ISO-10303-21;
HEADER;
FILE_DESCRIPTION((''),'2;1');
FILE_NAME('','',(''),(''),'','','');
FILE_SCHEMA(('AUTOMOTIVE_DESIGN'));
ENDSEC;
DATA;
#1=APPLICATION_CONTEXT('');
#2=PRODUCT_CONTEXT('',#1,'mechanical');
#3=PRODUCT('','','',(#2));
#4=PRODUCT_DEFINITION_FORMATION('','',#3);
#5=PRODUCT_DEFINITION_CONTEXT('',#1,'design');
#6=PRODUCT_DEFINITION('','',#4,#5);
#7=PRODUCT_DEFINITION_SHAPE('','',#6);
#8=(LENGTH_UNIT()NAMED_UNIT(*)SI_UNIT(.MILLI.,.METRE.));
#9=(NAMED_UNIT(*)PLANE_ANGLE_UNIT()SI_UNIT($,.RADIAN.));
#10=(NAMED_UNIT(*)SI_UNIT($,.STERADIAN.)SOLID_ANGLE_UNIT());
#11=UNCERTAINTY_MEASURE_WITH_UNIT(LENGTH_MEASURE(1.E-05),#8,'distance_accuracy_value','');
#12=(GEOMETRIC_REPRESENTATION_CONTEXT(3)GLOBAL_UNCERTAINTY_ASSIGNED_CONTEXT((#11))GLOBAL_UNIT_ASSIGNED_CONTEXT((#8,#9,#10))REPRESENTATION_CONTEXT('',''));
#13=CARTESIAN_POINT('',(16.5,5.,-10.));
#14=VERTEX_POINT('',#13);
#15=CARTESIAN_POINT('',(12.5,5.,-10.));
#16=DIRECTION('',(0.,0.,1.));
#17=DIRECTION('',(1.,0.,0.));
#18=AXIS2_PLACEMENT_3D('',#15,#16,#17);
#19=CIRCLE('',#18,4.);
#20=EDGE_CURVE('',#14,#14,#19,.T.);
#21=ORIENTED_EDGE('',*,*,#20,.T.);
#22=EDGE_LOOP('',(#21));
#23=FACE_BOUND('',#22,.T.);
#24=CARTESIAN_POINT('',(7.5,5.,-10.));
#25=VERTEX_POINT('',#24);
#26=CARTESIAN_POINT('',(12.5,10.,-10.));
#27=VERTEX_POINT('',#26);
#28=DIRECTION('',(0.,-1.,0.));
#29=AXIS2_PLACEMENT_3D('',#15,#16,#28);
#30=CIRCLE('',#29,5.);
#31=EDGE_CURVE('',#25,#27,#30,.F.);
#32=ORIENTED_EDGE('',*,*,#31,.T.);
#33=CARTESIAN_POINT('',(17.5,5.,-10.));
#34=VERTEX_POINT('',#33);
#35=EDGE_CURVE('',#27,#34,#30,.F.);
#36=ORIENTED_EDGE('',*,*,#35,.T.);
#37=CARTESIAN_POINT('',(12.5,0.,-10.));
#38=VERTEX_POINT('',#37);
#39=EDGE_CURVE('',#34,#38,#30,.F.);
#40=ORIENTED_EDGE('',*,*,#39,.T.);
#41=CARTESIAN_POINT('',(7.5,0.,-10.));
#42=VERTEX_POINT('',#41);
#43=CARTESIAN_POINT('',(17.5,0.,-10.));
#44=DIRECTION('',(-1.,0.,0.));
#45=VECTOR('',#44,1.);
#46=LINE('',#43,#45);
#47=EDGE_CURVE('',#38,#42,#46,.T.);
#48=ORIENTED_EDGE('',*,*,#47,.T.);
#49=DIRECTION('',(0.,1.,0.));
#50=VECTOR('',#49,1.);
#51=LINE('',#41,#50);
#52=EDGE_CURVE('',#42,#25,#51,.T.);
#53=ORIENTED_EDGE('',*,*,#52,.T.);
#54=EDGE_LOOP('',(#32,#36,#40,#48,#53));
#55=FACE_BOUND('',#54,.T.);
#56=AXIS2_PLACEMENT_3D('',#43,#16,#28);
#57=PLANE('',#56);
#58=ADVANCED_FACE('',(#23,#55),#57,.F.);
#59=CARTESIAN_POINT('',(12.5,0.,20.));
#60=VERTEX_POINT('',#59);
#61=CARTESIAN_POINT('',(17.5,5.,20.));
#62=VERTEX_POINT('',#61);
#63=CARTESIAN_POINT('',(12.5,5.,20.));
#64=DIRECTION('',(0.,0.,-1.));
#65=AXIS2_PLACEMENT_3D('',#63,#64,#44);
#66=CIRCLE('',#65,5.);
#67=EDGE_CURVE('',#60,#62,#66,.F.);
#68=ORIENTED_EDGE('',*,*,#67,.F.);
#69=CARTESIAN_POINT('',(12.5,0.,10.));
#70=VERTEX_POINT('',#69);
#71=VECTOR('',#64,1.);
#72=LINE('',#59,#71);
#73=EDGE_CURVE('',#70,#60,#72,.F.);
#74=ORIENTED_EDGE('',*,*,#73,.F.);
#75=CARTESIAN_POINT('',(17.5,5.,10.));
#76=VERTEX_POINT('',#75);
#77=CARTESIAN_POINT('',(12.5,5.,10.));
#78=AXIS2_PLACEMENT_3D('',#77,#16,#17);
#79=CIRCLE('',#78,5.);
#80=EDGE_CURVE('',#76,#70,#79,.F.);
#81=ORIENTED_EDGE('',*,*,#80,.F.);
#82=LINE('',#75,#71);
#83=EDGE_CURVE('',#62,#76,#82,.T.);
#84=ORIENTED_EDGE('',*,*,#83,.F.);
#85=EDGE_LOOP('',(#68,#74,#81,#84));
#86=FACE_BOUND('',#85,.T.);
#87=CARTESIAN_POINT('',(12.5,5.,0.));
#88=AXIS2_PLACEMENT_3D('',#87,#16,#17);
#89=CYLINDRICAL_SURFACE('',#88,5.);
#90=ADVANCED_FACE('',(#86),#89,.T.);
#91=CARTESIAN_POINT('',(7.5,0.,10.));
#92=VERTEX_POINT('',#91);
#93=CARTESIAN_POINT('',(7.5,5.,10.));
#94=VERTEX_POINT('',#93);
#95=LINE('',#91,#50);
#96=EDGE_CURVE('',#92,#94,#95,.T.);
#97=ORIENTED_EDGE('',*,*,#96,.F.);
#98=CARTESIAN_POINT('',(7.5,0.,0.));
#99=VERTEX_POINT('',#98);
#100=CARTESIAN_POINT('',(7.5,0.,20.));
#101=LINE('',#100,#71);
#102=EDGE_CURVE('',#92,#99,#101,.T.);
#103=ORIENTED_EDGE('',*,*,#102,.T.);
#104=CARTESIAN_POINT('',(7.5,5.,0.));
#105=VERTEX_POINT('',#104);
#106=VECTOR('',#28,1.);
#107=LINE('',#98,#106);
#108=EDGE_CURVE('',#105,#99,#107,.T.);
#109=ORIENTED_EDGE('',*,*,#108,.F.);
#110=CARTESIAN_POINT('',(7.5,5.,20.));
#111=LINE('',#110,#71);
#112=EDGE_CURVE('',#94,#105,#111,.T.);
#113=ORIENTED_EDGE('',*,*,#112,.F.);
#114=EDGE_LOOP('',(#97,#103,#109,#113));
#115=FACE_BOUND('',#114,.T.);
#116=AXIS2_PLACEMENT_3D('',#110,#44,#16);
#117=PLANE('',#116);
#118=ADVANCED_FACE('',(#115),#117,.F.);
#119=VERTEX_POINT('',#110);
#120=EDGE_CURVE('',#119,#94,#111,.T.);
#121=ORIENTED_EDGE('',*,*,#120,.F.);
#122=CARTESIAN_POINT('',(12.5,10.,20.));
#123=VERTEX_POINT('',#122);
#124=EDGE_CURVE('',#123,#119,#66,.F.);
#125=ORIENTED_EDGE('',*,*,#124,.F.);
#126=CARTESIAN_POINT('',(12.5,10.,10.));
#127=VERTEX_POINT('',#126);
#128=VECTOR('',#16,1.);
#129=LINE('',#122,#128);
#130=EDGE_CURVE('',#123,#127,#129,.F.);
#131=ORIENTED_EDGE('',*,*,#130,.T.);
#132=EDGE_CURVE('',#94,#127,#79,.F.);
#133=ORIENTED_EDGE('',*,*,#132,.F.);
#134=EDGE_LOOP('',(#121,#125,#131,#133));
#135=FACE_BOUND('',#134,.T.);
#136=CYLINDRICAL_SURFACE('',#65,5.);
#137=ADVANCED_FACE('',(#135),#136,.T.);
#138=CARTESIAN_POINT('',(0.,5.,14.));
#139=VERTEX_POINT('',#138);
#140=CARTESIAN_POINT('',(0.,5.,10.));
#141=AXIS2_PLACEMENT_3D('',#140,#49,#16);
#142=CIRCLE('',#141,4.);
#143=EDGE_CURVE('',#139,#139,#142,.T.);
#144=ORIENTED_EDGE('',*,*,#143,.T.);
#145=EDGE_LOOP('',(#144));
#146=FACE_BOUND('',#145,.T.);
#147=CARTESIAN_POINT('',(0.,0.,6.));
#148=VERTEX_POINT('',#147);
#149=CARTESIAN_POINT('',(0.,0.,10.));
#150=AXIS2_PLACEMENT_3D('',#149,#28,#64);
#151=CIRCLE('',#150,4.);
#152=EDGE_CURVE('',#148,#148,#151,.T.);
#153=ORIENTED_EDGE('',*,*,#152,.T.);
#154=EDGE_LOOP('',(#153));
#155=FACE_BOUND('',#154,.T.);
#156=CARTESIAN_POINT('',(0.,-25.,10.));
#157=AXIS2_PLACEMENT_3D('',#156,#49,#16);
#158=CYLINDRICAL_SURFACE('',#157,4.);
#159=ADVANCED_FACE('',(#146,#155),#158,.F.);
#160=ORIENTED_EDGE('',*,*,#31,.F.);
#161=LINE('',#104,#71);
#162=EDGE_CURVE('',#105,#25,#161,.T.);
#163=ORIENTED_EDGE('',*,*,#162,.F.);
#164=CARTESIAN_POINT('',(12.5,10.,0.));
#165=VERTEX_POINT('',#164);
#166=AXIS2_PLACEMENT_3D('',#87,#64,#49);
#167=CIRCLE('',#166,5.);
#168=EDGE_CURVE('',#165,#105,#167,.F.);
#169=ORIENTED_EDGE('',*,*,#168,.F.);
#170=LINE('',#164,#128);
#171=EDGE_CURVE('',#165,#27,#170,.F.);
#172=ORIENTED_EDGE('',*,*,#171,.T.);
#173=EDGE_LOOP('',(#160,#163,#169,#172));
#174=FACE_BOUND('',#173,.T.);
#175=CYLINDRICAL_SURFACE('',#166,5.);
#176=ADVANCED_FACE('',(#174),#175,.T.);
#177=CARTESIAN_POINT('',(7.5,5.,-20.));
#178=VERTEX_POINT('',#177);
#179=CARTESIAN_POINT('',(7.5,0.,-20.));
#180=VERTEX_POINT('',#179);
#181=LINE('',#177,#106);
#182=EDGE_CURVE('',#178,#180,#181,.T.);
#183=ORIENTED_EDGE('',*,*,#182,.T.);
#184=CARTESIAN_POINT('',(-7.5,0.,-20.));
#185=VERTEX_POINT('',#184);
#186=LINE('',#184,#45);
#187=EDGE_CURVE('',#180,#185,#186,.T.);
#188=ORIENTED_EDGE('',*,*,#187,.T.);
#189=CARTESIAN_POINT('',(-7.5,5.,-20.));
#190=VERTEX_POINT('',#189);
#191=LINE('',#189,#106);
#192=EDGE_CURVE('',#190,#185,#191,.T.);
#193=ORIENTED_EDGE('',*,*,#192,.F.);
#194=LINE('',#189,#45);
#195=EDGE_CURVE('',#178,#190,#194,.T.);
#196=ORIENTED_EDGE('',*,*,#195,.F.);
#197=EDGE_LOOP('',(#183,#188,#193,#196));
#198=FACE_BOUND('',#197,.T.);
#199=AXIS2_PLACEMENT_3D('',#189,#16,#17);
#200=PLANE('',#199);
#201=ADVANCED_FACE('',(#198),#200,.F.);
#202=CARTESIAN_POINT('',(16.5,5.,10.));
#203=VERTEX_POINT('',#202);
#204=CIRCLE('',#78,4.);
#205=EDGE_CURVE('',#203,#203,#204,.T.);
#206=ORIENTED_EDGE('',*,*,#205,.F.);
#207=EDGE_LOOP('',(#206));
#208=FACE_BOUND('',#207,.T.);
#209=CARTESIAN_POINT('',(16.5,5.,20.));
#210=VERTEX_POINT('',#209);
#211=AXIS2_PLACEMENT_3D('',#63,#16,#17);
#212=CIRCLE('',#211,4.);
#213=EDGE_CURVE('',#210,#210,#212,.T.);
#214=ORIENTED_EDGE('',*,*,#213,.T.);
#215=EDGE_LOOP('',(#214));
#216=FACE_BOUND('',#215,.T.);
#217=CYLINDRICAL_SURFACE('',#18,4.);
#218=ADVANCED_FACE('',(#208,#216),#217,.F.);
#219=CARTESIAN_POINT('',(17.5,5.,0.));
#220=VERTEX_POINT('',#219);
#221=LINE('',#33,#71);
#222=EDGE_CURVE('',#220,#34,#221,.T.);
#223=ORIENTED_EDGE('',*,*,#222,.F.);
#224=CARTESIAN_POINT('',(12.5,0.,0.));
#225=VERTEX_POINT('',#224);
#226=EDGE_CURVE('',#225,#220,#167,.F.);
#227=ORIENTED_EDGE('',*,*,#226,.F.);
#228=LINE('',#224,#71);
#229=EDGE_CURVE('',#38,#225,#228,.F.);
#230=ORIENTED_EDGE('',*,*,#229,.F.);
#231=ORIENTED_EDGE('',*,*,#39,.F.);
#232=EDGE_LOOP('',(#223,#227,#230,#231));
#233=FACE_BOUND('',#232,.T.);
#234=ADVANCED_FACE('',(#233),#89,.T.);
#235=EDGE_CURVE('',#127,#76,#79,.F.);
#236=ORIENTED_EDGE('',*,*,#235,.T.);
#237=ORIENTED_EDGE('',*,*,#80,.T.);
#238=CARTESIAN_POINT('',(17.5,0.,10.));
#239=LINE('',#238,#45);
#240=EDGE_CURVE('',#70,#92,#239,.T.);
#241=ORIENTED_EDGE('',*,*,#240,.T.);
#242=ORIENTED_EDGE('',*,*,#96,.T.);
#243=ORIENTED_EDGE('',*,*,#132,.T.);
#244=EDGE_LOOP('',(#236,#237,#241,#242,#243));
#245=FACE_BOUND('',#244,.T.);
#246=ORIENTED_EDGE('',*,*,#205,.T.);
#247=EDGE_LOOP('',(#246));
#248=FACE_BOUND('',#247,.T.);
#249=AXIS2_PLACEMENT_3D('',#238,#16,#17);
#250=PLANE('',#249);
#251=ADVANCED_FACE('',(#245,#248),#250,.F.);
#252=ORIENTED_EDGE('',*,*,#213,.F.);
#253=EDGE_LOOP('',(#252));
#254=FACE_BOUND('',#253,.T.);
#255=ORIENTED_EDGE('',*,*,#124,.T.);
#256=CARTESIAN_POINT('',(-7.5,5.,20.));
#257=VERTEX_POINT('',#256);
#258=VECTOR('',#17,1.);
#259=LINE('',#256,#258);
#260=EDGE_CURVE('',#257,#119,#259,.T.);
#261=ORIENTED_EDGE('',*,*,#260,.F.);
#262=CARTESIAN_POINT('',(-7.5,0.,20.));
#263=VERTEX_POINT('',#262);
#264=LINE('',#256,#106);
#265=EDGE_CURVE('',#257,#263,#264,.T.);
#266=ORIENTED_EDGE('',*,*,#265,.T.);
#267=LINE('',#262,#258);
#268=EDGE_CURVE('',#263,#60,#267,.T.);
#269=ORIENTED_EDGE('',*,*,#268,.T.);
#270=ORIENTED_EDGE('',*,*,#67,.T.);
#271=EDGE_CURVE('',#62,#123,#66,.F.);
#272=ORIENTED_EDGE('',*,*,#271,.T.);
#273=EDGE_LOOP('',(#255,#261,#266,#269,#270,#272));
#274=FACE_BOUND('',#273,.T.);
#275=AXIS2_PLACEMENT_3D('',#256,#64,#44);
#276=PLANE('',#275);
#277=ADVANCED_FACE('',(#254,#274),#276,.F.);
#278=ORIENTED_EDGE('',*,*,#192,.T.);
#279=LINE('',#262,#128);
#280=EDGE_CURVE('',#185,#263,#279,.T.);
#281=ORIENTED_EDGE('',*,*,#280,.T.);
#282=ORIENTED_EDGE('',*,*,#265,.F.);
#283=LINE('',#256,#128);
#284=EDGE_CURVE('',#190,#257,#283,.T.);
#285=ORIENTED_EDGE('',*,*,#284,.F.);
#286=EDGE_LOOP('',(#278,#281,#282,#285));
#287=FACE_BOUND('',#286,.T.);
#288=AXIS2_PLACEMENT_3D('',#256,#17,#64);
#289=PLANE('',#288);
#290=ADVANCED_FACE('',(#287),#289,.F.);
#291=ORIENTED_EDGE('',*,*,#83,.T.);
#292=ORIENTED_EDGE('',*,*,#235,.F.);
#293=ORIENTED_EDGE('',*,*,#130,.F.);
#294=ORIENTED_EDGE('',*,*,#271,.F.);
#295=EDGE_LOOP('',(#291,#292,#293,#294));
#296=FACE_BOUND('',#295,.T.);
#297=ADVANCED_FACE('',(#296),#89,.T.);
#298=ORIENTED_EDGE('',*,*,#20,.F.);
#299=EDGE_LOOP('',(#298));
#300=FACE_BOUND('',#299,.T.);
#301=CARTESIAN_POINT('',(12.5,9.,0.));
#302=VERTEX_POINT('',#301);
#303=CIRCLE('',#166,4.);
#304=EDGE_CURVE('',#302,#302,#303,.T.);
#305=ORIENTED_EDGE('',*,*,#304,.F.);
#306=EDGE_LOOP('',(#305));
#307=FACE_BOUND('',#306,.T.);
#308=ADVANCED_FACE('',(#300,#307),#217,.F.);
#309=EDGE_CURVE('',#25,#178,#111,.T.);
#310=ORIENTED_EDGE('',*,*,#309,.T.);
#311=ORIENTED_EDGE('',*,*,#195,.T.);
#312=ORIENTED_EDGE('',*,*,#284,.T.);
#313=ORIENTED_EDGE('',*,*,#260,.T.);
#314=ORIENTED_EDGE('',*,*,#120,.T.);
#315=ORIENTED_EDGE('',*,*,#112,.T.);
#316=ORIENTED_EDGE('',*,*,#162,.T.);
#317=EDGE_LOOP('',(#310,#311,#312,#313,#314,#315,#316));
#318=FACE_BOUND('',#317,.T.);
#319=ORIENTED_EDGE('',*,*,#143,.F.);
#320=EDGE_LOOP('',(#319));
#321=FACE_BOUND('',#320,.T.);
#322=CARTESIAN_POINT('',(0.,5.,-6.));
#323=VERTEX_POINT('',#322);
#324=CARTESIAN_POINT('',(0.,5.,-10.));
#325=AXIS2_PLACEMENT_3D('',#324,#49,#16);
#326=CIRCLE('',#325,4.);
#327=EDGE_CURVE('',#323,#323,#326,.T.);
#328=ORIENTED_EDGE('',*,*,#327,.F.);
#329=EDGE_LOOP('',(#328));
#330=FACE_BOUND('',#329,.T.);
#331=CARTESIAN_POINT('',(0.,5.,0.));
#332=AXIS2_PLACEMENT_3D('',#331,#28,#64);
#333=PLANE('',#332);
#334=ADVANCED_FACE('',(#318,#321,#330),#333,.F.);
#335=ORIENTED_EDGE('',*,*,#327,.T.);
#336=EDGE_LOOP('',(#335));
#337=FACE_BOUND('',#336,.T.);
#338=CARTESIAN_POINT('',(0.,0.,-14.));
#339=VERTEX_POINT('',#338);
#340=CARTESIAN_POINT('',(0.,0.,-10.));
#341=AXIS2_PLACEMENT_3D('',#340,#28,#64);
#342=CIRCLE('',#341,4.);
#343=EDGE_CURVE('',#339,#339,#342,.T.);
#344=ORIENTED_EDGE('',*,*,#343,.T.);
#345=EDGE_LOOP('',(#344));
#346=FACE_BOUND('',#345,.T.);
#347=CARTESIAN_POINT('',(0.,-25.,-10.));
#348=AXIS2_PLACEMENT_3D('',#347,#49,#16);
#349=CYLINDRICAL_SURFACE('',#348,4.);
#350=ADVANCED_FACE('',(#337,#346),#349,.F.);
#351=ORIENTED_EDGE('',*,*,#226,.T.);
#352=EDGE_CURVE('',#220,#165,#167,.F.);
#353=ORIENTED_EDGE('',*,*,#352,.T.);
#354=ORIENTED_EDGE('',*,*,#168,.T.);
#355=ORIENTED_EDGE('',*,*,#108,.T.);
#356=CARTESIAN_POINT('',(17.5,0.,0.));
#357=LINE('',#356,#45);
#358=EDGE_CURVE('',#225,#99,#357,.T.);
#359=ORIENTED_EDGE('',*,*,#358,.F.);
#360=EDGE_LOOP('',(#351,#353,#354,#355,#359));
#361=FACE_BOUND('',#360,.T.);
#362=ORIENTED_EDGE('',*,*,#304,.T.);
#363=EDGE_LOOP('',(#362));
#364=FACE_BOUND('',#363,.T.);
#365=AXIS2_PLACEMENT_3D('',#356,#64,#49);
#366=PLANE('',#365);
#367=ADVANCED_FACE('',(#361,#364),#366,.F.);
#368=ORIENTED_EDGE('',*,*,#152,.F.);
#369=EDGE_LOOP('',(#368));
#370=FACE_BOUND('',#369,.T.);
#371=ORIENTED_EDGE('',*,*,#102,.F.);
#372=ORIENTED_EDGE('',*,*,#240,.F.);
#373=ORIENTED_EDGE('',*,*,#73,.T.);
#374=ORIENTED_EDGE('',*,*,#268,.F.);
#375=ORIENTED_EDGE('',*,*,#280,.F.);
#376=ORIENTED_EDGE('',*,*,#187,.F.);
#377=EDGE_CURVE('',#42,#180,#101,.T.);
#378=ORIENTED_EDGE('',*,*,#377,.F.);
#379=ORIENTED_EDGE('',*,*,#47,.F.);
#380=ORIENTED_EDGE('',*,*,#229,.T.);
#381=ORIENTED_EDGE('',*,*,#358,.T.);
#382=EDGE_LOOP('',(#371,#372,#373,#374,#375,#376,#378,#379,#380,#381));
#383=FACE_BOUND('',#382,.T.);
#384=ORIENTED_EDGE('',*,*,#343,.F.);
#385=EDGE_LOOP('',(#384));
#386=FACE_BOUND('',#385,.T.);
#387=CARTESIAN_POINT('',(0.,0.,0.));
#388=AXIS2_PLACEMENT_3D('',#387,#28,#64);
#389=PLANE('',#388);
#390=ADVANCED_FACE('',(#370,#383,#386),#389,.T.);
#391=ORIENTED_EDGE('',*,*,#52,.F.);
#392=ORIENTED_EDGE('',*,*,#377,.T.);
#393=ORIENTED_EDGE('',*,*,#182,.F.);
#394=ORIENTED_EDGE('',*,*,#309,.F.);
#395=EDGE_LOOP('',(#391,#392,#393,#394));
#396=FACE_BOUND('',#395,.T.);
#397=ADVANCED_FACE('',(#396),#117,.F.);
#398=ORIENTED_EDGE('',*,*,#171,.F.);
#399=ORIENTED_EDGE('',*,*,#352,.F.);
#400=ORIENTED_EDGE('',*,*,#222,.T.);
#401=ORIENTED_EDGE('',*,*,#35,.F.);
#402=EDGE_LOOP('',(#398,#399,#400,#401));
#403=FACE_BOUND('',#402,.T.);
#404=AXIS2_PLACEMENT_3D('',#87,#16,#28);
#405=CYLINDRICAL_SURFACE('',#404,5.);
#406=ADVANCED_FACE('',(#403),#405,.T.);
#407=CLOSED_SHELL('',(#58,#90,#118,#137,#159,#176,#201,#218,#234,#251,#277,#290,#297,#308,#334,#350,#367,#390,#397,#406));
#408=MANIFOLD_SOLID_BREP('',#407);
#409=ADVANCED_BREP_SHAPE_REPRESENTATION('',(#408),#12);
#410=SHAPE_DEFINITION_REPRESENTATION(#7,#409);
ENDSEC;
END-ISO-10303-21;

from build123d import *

# Parameters (mm, degrees)
SZKIC1_W                    = 15
SZKIC1_H                    = 40
DODANIE_WYCI_GNI_CIE1_DEPTH = 5
SZKIC2_W                    = 10
SZKIC2_H                    = 10
DODANIE_WYCI_GNI_CIE2_DEPTH = 10
SZKIC3_R                    = 4
WYTNIJ_WYCI_GNI_CIE1_DEPTH  = 30
ZAOKR_GLENIE1_R             = 5
SZKIC4_R                    = 4
WYTNIJ_WYCI_GNI_CIE2_DEPTH  = 30


with BuildPart() as part:
    # Szkic1 → Dodanie-wyciągnięcie1 (new body)
    with BuildSketch(Plane(origin=(0, 0, 0), x_dir=(1, 0, 0), z_dir=(0, 1, 0))):
        Rectangle(SZKIC1_W, SZKIC1_H)
    extrude(amount=DODANIE_WYCI_GNI_CIE1_DEPTH)

    # Szkic2 → Dodanie-wyciągnięcie2 (add)
    with BuildSketch(Plane(origin=(7.5, 0, 0), x_dir=(0, 0, -1), z_dir=(1, 0, 0))):
        with Locations((-15, 5)):
            Rectangle(SZKIC2_W, SZKIC2_H)
        with Locations((5, 5)):
            Rectangle(SZKIC2_W, SZKIC2_H)
    extrude(amount=DODANIE_WYCI_GNI_CIE2_DEPTH)

    # Szkic3 → Wytnij-wyciągnięcie1 (cut)
    with BuildSketch(Plane.XY.offset(20)):
        with Locations((12.5, 5)):
            Circle(SZKIC3_R)
    extrude(amount=-WYTNIJ_WYCI_GNI_CIE1_DEPTH, mode=Mode.SUBTRACT)

    # Zaokrąglenie1
    zaokr_glenie1_edges = [part.edges().sort_by_distance(p)[0] for p in [
        (7.5, 10, 15),
        (7.5, 10, -5),
        (17.5, 0, 15),
        (17.5, 0, -5),
        (17.5, 10, -5),
        (17.5, 10, 15),
    ]]
    fillet(zaokr_glenie1_edges, radius=ZAOKR_GLENIE1_R - 0.0001)  # a hair under: the kernel refuses the full size

    # Szkic4 → Wytnij-wyciągnięcie2 (cut)
    with BuildSketch(Plane(origin=(0, 5, 0), x_dir=(1, 0, 0), z_dir=(0, 1, 0))):
        with Locations(Location((0, 10, 0), (0, 0, 270))):
            Circle(SZKIC4_R)
        with Locations(Location((0, -10, 0), (0, 0, 270))):
            Circle(SZKIC4_R)
    extrude(amount=-WYTNIJ_WYCI_GNI_CIE2_DEPTH, mode=Mode.SUBTRACT)


solid = part.part
